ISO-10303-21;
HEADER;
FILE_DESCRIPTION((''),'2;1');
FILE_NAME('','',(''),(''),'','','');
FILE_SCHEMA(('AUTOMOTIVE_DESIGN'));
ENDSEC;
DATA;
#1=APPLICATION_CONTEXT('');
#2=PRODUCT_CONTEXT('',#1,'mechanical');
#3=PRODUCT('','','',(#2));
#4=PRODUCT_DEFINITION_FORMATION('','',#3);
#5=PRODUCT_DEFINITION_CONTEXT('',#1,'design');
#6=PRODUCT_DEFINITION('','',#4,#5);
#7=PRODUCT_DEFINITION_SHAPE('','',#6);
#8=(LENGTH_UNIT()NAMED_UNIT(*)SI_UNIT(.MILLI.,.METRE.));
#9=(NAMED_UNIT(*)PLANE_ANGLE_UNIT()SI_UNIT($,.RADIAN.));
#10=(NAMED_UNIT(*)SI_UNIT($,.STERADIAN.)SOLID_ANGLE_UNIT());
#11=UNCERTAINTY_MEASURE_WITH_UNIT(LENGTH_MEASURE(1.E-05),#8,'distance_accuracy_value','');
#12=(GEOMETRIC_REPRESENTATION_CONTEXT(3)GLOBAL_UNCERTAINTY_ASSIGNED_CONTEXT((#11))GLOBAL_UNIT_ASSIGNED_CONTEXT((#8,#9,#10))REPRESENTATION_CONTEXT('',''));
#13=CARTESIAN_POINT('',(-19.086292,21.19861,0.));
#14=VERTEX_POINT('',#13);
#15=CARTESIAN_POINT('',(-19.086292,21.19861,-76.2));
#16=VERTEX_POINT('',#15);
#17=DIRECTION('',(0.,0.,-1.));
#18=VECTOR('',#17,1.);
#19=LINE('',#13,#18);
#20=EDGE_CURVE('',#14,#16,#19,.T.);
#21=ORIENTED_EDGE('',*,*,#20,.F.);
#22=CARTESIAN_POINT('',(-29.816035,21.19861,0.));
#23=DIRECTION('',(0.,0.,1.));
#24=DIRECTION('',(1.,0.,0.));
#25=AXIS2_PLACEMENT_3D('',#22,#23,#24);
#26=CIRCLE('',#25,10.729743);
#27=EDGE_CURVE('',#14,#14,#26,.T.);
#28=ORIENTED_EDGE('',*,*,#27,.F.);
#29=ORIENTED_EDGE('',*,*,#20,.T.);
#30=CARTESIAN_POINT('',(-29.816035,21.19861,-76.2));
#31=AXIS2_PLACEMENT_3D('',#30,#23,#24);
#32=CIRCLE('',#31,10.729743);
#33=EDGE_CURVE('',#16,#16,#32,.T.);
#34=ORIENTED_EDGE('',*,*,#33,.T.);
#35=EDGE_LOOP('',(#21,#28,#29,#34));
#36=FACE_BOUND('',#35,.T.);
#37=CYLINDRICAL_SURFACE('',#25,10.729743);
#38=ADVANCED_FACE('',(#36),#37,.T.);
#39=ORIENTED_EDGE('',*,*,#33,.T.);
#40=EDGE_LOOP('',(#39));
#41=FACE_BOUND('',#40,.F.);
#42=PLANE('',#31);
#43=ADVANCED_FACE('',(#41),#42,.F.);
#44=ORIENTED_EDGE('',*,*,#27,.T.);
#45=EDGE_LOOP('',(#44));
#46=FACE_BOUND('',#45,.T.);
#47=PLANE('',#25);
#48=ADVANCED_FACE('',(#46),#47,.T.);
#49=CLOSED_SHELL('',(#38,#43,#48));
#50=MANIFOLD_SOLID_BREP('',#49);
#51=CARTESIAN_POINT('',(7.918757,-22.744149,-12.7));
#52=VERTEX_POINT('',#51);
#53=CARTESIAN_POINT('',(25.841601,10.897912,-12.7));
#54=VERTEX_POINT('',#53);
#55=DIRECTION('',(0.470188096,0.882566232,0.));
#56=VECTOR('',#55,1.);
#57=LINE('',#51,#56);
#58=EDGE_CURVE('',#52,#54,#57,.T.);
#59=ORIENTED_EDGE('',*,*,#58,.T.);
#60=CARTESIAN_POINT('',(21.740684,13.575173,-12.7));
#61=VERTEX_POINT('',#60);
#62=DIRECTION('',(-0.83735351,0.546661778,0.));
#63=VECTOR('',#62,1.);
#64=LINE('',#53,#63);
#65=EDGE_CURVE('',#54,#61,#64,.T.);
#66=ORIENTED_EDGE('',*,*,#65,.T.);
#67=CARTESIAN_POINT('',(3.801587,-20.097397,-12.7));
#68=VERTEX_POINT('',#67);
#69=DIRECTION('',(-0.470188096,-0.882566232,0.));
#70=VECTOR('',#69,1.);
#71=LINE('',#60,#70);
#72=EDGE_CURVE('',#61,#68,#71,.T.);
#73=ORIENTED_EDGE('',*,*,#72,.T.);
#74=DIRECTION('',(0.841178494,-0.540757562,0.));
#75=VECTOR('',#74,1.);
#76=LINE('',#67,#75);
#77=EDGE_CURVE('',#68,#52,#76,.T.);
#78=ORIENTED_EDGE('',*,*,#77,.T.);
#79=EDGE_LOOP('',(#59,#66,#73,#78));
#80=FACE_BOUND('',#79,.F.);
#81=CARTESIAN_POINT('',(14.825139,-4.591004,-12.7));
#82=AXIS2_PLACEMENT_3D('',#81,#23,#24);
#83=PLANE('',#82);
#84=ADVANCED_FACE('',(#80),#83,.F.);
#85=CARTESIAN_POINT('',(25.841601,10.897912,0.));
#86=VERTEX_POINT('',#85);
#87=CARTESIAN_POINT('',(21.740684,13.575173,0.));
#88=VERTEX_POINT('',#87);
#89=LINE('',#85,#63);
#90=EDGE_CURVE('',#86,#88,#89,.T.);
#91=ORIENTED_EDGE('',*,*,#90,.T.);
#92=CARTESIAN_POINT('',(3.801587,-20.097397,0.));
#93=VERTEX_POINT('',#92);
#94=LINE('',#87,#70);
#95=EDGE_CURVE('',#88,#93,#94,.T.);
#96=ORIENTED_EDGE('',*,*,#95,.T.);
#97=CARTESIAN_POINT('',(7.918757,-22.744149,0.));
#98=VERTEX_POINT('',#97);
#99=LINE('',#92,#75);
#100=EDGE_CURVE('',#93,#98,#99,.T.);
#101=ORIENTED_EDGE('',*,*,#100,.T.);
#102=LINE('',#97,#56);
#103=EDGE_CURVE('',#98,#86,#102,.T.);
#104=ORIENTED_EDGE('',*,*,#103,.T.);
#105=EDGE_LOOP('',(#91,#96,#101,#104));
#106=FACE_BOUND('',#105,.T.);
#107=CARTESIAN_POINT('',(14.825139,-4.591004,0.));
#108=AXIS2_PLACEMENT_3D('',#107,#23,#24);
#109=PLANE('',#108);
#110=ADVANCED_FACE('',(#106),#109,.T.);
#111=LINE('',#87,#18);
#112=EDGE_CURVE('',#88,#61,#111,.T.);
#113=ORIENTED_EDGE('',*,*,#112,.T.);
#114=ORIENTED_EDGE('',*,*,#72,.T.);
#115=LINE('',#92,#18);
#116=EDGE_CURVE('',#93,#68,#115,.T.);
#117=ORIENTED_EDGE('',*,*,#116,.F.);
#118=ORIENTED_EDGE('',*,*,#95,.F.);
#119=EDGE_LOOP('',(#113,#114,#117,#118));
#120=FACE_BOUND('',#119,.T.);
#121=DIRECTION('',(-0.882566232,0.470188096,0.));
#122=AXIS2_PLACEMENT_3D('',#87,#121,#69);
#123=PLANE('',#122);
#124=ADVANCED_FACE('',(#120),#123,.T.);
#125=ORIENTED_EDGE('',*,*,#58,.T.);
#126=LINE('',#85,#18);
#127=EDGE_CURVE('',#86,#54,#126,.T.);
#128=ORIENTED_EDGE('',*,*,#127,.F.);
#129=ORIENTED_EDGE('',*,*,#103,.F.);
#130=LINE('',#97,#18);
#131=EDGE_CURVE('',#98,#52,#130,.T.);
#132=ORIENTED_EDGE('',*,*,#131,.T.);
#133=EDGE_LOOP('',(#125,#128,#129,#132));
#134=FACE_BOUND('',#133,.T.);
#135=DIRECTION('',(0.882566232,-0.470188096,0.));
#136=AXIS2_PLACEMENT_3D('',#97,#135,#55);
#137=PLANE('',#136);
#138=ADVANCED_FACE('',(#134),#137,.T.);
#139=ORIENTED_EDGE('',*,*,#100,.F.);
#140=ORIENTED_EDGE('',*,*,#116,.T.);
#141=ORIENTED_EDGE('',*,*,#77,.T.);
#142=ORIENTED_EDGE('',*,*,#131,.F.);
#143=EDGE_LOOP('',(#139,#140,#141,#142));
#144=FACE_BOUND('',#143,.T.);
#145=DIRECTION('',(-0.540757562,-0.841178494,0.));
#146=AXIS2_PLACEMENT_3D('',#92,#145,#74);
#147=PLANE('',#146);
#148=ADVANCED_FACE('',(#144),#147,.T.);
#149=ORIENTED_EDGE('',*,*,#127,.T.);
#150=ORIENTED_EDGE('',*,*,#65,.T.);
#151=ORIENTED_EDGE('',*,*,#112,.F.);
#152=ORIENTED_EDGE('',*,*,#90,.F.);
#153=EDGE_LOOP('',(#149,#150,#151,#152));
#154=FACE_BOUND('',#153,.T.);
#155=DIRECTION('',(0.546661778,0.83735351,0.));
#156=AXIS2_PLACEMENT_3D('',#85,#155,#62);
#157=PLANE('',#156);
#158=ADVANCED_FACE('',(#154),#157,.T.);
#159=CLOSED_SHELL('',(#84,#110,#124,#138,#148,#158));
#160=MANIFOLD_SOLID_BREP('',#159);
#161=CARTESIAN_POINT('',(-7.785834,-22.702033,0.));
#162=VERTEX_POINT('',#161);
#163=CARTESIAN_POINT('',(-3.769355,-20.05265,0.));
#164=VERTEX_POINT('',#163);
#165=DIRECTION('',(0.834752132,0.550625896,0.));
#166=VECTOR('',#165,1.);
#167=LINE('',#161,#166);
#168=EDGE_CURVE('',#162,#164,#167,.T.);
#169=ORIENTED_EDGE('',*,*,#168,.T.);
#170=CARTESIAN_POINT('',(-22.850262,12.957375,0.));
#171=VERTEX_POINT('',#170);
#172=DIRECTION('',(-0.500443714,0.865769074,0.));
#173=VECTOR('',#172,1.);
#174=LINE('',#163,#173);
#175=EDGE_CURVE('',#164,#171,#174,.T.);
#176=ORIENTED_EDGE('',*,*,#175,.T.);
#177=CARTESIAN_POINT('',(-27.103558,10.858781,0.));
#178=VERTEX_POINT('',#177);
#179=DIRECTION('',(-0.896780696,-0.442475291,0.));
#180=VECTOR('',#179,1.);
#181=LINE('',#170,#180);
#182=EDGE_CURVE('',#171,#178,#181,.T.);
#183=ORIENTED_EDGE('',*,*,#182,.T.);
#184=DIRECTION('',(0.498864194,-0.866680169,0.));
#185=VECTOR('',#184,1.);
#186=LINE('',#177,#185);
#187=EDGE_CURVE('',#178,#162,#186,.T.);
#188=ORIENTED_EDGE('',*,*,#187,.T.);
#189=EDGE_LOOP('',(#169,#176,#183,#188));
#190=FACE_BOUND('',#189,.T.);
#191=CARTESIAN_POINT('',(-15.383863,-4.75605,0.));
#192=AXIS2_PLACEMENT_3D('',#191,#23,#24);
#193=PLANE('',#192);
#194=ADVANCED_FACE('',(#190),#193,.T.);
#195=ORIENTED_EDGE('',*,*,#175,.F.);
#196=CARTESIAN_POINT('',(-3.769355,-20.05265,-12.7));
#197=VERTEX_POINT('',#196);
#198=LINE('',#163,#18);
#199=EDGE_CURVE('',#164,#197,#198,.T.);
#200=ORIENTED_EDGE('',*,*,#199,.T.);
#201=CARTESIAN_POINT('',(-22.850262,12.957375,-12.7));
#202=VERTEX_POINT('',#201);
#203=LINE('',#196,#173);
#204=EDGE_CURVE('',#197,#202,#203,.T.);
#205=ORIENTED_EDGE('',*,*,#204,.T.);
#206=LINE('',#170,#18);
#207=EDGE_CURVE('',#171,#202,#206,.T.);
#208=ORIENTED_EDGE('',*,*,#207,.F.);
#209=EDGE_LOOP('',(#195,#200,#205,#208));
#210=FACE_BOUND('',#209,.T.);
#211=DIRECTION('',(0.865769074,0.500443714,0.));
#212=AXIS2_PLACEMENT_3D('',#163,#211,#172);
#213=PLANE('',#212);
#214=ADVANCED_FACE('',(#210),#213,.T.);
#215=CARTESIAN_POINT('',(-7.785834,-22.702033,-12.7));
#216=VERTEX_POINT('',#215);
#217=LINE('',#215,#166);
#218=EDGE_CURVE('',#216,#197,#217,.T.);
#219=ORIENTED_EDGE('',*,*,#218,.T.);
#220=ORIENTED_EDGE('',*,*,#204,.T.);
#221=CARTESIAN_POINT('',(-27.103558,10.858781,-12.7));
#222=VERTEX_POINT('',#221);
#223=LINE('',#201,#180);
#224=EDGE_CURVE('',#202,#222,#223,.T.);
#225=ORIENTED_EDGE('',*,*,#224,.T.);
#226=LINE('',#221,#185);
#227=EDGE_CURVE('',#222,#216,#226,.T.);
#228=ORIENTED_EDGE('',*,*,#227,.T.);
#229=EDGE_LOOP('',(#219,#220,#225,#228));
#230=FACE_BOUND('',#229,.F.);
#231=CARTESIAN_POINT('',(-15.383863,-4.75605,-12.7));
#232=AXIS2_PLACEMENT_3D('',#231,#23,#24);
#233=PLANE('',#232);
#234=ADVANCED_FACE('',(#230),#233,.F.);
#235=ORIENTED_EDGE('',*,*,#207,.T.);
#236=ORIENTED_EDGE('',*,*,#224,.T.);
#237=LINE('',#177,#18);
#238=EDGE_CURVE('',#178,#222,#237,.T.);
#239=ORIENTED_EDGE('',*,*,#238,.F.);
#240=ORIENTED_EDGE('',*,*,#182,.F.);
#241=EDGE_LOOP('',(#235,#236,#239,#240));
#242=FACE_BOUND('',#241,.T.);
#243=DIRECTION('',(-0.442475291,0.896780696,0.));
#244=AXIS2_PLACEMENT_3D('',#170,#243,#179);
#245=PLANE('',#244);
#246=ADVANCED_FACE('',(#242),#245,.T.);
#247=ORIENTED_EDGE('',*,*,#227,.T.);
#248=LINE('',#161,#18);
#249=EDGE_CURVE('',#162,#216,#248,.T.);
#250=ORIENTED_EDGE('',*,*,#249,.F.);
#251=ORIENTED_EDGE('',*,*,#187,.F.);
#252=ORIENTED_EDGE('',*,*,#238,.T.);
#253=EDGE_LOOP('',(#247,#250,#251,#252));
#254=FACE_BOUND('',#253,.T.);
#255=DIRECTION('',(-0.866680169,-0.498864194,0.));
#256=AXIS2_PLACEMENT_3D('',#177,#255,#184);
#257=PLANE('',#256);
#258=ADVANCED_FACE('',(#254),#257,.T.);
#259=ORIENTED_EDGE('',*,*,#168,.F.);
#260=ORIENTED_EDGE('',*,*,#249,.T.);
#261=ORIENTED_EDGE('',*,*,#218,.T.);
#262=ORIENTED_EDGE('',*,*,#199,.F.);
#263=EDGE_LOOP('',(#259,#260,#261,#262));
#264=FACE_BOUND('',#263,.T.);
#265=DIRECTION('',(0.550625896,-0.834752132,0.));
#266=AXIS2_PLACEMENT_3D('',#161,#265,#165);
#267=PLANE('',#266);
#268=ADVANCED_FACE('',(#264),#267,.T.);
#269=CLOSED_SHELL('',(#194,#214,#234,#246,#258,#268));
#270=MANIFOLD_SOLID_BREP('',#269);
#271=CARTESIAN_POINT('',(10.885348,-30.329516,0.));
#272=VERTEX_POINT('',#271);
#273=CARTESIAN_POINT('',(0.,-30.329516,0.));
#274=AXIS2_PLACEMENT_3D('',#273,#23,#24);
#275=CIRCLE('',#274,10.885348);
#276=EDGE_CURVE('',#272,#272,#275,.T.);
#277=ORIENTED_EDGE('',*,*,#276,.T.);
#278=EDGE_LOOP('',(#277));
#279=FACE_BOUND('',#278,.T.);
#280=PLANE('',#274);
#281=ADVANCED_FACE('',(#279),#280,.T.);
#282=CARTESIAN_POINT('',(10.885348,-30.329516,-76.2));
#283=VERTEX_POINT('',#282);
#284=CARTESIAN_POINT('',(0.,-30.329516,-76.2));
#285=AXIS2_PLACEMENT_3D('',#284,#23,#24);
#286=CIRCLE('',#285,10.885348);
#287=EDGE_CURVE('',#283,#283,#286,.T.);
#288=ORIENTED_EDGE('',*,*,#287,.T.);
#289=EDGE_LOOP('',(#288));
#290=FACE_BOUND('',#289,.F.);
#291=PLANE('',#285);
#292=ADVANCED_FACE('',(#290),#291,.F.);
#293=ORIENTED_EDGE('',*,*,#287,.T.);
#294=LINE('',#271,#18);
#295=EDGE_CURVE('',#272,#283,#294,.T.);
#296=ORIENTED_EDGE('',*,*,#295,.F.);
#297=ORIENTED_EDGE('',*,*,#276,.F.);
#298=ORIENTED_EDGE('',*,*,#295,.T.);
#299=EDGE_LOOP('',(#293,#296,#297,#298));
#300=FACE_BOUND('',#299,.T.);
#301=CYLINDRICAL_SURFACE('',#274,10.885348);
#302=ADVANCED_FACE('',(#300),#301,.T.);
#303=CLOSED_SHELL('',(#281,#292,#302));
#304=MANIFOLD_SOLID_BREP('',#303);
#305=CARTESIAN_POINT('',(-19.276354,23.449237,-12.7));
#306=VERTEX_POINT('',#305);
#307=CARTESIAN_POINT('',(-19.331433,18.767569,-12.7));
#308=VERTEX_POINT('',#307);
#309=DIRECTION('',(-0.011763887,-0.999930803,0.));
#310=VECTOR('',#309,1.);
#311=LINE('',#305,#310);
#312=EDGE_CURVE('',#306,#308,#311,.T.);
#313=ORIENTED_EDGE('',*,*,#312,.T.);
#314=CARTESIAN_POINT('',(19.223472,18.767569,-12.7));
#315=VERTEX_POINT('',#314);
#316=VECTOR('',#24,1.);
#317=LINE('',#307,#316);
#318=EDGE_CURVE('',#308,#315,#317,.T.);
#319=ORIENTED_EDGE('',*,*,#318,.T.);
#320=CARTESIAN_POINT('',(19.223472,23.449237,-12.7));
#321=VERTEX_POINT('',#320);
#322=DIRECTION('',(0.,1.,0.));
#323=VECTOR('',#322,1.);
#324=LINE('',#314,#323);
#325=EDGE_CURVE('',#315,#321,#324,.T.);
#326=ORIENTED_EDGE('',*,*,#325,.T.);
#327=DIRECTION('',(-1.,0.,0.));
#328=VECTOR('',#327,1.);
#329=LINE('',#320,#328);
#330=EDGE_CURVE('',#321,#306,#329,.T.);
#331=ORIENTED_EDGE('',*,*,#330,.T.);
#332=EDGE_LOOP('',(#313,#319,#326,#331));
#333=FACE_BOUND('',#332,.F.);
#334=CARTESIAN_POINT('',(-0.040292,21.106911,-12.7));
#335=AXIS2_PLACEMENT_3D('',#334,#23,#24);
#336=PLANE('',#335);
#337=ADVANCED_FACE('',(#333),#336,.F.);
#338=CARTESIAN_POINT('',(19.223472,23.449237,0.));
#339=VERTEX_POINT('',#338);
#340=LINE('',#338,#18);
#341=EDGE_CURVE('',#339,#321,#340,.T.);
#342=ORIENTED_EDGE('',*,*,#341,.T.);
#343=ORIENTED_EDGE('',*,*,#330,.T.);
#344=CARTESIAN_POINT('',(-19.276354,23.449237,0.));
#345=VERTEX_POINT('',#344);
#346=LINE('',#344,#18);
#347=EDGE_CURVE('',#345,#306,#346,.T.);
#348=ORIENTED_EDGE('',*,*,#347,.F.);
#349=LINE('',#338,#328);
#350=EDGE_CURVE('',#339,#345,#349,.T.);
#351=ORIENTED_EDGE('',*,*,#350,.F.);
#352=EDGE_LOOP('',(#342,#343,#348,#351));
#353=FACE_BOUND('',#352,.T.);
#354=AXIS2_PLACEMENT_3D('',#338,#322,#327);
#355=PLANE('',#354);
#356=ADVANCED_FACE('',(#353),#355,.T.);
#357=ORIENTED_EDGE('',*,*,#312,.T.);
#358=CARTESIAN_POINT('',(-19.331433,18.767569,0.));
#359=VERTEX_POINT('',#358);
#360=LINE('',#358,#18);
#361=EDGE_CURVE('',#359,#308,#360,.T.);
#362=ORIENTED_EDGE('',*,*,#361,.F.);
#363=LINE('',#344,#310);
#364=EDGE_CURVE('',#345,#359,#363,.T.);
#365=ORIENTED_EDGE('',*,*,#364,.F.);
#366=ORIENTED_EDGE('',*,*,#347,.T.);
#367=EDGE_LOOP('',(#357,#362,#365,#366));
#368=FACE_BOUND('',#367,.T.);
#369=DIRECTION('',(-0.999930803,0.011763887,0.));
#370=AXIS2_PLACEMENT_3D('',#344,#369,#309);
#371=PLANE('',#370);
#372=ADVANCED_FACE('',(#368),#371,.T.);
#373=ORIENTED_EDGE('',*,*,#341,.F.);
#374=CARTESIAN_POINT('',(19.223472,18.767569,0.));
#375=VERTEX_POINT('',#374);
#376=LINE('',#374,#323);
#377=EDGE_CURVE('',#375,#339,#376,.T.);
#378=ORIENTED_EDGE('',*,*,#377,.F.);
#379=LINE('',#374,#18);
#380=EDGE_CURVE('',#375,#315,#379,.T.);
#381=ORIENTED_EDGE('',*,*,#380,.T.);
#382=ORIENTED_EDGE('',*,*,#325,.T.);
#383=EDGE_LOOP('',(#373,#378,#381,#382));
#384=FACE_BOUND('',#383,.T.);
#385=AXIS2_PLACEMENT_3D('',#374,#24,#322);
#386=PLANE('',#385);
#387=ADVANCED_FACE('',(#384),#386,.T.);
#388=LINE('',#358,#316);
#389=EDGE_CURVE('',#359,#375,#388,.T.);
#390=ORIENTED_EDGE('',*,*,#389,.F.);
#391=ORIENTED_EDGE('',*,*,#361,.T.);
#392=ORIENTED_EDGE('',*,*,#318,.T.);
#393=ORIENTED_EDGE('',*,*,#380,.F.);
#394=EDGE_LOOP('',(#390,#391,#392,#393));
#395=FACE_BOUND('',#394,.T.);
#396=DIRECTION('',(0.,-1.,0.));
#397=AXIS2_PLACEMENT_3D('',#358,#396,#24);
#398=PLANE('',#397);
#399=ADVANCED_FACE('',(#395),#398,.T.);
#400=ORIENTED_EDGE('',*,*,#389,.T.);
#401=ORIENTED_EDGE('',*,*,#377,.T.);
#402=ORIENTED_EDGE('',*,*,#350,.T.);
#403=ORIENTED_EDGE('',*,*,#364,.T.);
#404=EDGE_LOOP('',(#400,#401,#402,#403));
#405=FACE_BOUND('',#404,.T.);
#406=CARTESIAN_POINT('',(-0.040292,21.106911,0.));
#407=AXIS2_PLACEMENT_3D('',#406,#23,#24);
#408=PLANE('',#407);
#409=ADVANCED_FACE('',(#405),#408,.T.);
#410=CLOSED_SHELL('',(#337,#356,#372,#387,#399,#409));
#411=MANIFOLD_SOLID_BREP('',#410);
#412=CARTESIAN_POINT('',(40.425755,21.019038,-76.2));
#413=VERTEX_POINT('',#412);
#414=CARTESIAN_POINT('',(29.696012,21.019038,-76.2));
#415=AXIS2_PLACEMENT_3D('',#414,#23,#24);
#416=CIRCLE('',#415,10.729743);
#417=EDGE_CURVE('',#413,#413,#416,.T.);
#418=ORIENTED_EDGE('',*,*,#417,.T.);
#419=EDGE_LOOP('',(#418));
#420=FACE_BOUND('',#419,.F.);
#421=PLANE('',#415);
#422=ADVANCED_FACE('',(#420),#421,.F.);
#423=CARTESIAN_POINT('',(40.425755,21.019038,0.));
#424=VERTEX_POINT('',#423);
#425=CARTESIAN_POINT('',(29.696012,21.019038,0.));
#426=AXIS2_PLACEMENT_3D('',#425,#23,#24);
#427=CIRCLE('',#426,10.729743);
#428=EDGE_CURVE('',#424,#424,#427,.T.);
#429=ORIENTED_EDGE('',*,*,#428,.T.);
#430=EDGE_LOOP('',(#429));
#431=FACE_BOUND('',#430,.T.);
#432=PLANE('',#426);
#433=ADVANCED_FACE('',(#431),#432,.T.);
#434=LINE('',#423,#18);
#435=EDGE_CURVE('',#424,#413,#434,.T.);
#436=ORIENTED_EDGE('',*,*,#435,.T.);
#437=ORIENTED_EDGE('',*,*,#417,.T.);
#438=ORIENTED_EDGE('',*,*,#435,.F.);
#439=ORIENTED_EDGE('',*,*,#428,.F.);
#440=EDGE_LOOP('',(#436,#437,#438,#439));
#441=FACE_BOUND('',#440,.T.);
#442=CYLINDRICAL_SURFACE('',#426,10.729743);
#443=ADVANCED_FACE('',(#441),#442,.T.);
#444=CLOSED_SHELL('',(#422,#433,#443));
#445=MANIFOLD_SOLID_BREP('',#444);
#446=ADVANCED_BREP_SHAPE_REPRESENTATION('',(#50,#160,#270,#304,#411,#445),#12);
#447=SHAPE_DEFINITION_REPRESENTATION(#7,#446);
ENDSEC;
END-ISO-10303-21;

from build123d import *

# Parameters (mm, degrees)
F0_R     = 10.7297432275
F1_DEPTH = 76.2
F0_R_2   = 10.8853479612
F3_DEPTH = 12.7


# Not quite as in the source:
# - a length typed as a fraction of an inch, garbled in the dataset ("3 / 203.2 mm" for 3/8 in), is restored


with BuildPart() as f1:
    # F0 (on Top) → F1 (new body)
    with BuildSketch(Plane.XY):
        with Locations((-29.8160351813, 21.1986098439)):
            Circle(F0_R)
    extrude(amount=-F1_DEPTH)


with BuildPart() as f1b:
    # F0 (on Top) → F1, piece 2 (new body)
    with BuildSketch(Plane.XY):
        with Locations((29.6960119158, 21.0190378129)):
            Circle(F0_R)
    extrude(amount=-F1_DEPTH)


with BuildPart() as f1c:
    # F0 (on Top) → F1, piece 3 (new body)
    with BuildSketch(Plane.XY):
        with Locations((0, -30.3295161575)):
            Circle(F0_R_2)
    extrude(amount=-F1_DEPTH)


with BuildPart() as f3:
    # F2 (on Top) → F3 (new body)
    with BuildSketch(Plane.XY):
        Polygon((-19.2763544619, 23.4492365271), (-19.331432879, 18.7675692141), (19.2234721035, 18.7675692141), (19.2234721035, 23.4492365271), align=None)
    extrude(amount=-F3_DEPTH)


with BuildPart() as f3b:
    # F2 (on Top) → F3, piece 2 (new body)
    with BuildSketch(Plane.XY):
        Polygon((-27.1035581827, 10.8587807044), (-7.785834372, -22.7020327002), (-3.7693547531, -20.0526502035), (-22.8502620012, 12.9573745653), align=None)
    extrude(amount=-F3_DEPTH)


with BuildPart() as f3c:
    # F2 (on Top) → F3, piece 3 (new body)
    with BuildSketch(Plane.XY):
        Polygon((21.7406842858, 13.5751729831), (3.8015870377, -20.0973968022), (7.9187573865, -22.7441489697), (25.8416007684, 10.8979115078), align=None)
    extrude(amount=-F3_DEPTH)


solid = Compound([f1.part, f1b.part, f1c.part, f3.part, f3b.part, f3c.part])
